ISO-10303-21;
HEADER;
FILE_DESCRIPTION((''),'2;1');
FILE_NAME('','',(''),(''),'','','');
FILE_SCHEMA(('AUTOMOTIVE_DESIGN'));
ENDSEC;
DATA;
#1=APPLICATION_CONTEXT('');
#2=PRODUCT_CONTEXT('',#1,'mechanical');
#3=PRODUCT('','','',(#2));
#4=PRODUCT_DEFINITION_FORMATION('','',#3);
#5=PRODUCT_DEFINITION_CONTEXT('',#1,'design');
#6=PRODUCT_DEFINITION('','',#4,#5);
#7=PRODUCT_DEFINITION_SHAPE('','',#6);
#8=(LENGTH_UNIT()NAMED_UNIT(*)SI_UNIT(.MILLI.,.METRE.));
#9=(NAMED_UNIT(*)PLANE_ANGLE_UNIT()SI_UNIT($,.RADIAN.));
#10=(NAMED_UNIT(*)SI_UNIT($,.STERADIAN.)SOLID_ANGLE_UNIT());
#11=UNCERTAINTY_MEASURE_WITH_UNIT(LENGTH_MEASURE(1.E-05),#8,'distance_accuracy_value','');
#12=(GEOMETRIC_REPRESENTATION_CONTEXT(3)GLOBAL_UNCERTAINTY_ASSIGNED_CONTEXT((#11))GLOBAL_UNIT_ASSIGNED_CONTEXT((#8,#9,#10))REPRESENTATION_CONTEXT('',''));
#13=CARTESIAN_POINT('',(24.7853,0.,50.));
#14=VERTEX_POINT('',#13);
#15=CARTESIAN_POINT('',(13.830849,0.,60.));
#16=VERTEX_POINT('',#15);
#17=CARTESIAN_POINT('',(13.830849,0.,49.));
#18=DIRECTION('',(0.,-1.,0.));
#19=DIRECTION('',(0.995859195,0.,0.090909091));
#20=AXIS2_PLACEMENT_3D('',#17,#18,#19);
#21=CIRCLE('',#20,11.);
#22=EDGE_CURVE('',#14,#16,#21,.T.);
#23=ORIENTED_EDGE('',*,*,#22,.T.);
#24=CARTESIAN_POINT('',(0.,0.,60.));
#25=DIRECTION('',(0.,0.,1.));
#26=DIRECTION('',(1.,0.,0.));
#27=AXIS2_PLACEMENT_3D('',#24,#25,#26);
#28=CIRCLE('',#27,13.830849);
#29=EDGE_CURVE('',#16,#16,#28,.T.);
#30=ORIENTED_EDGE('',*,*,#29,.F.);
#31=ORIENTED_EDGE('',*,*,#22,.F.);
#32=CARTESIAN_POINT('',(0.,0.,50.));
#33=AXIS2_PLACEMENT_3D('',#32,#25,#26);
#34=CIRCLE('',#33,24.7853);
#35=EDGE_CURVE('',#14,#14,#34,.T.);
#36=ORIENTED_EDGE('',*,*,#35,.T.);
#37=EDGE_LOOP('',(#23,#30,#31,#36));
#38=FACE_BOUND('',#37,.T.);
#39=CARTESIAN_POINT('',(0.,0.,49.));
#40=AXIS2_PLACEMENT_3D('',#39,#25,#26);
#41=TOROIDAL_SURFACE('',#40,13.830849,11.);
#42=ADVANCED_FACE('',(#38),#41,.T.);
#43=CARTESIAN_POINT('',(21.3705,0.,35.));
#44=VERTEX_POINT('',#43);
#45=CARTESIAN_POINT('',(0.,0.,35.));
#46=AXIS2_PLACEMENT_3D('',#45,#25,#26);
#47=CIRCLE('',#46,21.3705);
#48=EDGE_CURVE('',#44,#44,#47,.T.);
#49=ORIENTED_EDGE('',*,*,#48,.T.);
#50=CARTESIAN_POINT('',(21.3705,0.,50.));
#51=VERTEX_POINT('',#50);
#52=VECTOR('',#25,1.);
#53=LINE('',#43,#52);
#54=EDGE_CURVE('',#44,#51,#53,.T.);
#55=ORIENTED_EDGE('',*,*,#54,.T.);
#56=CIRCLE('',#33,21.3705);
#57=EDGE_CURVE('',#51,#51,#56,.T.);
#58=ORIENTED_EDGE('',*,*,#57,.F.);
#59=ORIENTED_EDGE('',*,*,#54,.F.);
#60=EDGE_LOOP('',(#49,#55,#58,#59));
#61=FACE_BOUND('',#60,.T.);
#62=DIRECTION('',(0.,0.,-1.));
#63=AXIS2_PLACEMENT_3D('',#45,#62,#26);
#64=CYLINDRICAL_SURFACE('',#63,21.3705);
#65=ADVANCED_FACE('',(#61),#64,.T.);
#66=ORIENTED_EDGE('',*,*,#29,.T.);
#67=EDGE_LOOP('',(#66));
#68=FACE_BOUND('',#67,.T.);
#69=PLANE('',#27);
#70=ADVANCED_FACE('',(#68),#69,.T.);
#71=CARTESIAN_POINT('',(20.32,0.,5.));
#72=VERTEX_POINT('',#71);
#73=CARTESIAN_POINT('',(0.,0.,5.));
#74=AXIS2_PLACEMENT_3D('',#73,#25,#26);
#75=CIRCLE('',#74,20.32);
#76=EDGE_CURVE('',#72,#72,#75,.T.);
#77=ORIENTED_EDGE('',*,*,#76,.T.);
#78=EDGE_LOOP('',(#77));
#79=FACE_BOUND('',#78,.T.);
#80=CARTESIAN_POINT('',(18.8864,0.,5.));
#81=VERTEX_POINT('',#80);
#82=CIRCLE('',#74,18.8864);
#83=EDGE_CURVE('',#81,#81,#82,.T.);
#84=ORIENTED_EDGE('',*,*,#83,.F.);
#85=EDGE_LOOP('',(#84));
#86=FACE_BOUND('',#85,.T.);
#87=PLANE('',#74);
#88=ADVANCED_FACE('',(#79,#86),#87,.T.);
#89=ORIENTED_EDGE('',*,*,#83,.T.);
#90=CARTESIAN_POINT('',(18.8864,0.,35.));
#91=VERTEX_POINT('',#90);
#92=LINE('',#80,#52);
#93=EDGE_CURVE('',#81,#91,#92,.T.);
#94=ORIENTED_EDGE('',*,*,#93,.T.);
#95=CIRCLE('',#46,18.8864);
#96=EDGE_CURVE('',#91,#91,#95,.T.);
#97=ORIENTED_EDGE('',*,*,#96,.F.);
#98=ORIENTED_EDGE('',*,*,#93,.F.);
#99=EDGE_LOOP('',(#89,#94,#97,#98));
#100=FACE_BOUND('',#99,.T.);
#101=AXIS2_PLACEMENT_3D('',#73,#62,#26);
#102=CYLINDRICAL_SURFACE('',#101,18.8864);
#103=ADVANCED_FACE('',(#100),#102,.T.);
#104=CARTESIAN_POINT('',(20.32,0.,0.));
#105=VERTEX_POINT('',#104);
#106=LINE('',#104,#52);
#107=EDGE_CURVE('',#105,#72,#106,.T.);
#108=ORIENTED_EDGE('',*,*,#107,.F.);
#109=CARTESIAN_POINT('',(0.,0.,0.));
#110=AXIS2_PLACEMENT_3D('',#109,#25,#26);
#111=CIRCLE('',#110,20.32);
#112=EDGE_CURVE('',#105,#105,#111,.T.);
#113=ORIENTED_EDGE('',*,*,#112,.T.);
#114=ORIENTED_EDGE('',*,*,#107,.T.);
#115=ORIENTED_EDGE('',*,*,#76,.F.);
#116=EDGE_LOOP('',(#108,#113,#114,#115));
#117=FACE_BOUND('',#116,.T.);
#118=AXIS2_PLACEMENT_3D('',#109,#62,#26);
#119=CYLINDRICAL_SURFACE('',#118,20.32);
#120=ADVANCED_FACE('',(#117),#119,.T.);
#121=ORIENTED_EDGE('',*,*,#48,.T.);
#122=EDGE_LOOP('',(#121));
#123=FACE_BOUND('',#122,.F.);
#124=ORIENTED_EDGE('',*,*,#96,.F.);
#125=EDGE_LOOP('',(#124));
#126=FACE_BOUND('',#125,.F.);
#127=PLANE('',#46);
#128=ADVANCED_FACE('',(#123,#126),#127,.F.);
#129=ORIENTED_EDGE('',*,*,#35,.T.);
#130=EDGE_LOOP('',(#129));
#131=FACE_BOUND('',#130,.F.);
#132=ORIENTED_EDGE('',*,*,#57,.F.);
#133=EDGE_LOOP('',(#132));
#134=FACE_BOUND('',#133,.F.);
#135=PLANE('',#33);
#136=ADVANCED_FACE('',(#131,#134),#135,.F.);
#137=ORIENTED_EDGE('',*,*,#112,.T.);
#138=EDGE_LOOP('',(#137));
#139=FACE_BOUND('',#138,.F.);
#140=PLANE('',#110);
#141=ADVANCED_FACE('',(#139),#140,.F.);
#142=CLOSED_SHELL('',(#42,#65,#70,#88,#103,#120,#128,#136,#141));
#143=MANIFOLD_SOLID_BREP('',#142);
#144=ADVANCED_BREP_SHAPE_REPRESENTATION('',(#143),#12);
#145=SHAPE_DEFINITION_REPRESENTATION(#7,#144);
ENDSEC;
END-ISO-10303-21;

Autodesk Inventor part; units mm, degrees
ref_plane "YZ Plane" through (0, 0, 0) normal (1, 0, 0) x (0, 1, 0)
ref_plane "XZ Plane" through (0, 0, 0) normal (0, 1, 0) x (-1, 0, 0)
ref_plane "XY Plane" through (0, 0, 0) normal (0, 0, 1) x (1, 0, 0)
sketch "Sketch1" plane through (0, 0, 0) normal (0, 0, 1) x (1, 0, 0)
  circle A0 centre (0, 0) radius 20.32
  dimension "d0" = 40.64
extrude "Extrusion1" add sketch "Sketch1" along normal blind 5
sketch "Sketch2" plane through (0, 0, 5) normal (0, 0, 1) x (1, 0, 0)
  circle A0 centre (0, 0) radius 18.8864
extrude "Extrusion4" add sketch "Sketch2" along normal blind 30
sketch "Sketch3" plane through (0, 0, 35) normal (0, 0, 1) x (1, 0, 0)
  circle A0 centre (0, 0) radius 21.3705
extrude "Extrusion5" add sketch "Sketch3" along normal blind 15
sketch "Sketch4" plane through (0, 0, 50) normal (0, 0, 1) x (1, 0, 0)
  circle A0 centre (0, 0) radius 24.7853
extrude "Extrusion6" add sketch "Sketch4" along normal blind 10
fillet "Fillet1" radius 11 1 edges at (-24.7853, 0, 60)
equation "\"BendRadius\" = Thickness"
equation "\"BendReliefWidth\" = Thickness"
equation "\"BendReliefDepth\" = 0.5 * Thickness"
equation "\"CornerReliefSize\" = 4 * Thickness"
equation "\"MinimumRemnant\" = 2 * Thickness"
equation "\"TransitionRadius\" = BendRadius"
equation "\"JacobiRadiusSize\" = BendRadius"
equation "\"GapSize\" = Thickness"
equation "\"Thickness\" = 3.048"
properties part number "hitan_stop"
